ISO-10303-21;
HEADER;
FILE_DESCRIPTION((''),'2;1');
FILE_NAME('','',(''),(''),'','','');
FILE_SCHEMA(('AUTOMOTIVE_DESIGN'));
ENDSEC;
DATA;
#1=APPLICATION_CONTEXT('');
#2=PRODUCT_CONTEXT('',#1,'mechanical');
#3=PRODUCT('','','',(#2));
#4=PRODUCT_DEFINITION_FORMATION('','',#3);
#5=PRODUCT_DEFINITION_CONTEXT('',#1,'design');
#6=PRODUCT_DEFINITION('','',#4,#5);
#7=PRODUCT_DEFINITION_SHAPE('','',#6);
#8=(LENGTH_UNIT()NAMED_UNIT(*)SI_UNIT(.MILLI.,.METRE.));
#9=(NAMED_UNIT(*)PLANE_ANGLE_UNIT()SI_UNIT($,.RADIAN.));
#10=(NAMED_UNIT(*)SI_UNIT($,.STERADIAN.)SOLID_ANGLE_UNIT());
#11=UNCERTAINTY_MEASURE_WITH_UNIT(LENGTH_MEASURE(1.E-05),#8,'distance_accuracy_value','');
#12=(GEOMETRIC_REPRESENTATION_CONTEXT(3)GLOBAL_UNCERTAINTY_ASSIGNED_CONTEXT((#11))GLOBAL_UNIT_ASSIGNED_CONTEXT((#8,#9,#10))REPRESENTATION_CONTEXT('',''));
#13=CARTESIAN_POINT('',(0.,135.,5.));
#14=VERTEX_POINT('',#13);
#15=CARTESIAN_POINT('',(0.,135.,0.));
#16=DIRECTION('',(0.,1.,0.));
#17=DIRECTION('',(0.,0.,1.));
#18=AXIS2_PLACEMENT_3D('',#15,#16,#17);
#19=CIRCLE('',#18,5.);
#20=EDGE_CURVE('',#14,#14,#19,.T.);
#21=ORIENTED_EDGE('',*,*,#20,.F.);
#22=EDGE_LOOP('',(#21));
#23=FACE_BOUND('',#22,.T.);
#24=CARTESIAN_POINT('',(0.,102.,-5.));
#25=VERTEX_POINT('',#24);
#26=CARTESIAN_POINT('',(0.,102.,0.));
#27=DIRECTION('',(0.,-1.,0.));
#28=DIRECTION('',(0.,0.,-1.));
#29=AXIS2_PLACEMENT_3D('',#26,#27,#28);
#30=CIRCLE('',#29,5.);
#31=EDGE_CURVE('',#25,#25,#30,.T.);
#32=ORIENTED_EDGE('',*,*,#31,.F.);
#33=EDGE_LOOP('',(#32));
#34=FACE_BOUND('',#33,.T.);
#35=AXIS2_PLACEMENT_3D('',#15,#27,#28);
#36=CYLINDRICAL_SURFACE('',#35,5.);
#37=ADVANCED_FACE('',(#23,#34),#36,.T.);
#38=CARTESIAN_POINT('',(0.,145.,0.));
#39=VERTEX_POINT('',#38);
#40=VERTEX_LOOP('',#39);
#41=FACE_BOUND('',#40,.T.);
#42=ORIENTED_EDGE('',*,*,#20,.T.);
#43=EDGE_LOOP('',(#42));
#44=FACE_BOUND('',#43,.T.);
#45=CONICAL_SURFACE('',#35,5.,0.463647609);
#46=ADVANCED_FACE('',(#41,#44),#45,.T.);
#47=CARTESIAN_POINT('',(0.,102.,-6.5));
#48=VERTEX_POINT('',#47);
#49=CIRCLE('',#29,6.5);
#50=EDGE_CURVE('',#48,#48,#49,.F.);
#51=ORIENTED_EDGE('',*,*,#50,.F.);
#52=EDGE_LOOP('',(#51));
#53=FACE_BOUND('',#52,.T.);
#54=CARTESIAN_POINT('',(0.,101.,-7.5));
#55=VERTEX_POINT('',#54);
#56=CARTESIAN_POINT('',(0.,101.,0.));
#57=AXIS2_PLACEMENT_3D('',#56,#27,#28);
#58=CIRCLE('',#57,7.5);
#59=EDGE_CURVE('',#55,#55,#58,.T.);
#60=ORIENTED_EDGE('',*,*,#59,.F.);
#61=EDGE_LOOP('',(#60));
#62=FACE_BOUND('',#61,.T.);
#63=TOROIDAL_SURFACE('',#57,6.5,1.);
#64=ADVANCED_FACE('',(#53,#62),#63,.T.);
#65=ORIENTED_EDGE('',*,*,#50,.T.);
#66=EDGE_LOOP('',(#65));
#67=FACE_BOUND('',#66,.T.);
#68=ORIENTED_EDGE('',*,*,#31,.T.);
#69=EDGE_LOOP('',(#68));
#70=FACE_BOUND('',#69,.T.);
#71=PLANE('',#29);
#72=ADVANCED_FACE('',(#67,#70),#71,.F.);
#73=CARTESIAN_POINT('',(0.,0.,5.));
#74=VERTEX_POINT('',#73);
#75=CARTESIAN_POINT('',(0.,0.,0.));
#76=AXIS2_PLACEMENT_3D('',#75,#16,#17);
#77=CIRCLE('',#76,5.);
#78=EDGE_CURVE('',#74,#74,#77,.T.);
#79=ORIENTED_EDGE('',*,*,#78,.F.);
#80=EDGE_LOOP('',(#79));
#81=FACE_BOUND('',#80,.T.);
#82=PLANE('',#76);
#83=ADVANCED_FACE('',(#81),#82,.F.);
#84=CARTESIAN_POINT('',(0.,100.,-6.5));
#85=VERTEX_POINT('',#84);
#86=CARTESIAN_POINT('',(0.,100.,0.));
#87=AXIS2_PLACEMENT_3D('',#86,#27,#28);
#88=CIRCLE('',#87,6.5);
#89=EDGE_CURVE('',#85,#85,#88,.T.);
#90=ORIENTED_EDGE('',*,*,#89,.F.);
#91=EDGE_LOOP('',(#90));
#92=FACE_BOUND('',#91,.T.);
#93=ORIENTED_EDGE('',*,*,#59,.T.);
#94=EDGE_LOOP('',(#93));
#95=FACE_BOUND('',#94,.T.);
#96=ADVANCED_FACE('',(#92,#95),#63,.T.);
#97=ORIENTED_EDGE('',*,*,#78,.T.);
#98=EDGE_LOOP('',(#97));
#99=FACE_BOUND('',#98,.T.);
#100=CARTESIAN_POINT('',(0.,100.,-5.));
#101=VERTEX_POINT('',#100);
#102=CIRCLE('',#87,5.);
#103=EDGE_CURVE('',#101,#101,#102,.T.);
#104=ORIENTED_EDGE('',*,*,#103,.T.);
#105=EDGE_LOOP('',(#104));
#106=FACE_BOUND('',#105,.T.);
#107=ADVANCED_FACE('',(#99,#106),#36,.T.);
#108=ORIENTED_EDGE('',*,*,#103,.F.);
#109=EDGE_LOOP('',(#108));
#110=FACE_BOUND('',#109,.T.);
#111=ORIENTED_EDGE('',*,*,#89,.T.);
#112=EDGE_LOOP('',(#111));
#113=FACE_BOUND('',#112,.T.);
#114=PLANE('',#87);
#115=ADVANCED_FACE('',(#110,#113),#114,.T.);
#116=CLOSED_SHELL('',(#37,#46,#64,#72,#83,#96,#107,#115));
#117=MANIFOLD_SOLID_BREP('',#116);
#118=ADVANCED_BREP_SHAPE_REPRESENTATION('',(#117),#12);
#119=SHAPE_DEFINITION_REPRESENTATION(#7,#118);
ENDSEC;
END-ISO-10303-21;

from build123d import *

# Parameters (mm, degrees)
SKETCH1_R           = 5
BOSS_EXTRUDE1_DEPTH = 135
BOSS_EXTRUDE2_START = -100
SKETCH3_R           = 7.5
SKETCH3_R_2         = 5
BOSS_EXTRUDE2_DEPTH = 2
FILLET1_R           = 1


with BuildPart() as part:
    # Sketch1 → Boss-Extrude1 (new body)
    with BuildSketch(Plane(origin=(0, 0, 0), x_dir=(1, 0, 0), z_dir=(0, 1, 0))):
        with Locations(Location((0, 0, 0), (0, 0, 270))):
            Circle(SKETCH1_R)
    extrude(amount=BOSS_EXTRUDE1_DEPTH)

    # Sketch2 → Revolve3 (revolve)
    with BuildSketch(Plane.XY, mode=Mode.PRIVATE) as revolve3_sk:
        Polygon((0, 145), (5, 135), (0, 135), align=None)
    revolve(revolve3_sk.sketch.rotate(Axis((0, 135, 0), (0, -1, 0)), 270), axis=Axis((0, 135, 0), (0, -1, 0)))

    # Sketch3 → Boss-Extrude2 (add)
    with BuildSketch(Plane.XZ.offset(BOSS_EXTRUDE2_START)):
        with Locations(Location((0, 0, 0), (0, 0, 270))):
            Circle(SKETCH3_R)
        with Locations(Location((0, 0, 0), (0, 0, 270))):
            Circle(SKETCH3_R_2, mode=Mode.SUBTRACT)
    extrude(amount=-BOSS_EXTRUDE2_DEPTH)

    # Fillet1
    fillet1_edges = [part.edges().sort_by_distance(p)[0] for p in [
        (0, 100, 7.5),
        (0, 102, 7.5),
    ]]
    fillet(fillet1_edges, radius=FILLET1_R - 0.0001)  # a hair under: the kernel refuses the full size


solid = part.part
